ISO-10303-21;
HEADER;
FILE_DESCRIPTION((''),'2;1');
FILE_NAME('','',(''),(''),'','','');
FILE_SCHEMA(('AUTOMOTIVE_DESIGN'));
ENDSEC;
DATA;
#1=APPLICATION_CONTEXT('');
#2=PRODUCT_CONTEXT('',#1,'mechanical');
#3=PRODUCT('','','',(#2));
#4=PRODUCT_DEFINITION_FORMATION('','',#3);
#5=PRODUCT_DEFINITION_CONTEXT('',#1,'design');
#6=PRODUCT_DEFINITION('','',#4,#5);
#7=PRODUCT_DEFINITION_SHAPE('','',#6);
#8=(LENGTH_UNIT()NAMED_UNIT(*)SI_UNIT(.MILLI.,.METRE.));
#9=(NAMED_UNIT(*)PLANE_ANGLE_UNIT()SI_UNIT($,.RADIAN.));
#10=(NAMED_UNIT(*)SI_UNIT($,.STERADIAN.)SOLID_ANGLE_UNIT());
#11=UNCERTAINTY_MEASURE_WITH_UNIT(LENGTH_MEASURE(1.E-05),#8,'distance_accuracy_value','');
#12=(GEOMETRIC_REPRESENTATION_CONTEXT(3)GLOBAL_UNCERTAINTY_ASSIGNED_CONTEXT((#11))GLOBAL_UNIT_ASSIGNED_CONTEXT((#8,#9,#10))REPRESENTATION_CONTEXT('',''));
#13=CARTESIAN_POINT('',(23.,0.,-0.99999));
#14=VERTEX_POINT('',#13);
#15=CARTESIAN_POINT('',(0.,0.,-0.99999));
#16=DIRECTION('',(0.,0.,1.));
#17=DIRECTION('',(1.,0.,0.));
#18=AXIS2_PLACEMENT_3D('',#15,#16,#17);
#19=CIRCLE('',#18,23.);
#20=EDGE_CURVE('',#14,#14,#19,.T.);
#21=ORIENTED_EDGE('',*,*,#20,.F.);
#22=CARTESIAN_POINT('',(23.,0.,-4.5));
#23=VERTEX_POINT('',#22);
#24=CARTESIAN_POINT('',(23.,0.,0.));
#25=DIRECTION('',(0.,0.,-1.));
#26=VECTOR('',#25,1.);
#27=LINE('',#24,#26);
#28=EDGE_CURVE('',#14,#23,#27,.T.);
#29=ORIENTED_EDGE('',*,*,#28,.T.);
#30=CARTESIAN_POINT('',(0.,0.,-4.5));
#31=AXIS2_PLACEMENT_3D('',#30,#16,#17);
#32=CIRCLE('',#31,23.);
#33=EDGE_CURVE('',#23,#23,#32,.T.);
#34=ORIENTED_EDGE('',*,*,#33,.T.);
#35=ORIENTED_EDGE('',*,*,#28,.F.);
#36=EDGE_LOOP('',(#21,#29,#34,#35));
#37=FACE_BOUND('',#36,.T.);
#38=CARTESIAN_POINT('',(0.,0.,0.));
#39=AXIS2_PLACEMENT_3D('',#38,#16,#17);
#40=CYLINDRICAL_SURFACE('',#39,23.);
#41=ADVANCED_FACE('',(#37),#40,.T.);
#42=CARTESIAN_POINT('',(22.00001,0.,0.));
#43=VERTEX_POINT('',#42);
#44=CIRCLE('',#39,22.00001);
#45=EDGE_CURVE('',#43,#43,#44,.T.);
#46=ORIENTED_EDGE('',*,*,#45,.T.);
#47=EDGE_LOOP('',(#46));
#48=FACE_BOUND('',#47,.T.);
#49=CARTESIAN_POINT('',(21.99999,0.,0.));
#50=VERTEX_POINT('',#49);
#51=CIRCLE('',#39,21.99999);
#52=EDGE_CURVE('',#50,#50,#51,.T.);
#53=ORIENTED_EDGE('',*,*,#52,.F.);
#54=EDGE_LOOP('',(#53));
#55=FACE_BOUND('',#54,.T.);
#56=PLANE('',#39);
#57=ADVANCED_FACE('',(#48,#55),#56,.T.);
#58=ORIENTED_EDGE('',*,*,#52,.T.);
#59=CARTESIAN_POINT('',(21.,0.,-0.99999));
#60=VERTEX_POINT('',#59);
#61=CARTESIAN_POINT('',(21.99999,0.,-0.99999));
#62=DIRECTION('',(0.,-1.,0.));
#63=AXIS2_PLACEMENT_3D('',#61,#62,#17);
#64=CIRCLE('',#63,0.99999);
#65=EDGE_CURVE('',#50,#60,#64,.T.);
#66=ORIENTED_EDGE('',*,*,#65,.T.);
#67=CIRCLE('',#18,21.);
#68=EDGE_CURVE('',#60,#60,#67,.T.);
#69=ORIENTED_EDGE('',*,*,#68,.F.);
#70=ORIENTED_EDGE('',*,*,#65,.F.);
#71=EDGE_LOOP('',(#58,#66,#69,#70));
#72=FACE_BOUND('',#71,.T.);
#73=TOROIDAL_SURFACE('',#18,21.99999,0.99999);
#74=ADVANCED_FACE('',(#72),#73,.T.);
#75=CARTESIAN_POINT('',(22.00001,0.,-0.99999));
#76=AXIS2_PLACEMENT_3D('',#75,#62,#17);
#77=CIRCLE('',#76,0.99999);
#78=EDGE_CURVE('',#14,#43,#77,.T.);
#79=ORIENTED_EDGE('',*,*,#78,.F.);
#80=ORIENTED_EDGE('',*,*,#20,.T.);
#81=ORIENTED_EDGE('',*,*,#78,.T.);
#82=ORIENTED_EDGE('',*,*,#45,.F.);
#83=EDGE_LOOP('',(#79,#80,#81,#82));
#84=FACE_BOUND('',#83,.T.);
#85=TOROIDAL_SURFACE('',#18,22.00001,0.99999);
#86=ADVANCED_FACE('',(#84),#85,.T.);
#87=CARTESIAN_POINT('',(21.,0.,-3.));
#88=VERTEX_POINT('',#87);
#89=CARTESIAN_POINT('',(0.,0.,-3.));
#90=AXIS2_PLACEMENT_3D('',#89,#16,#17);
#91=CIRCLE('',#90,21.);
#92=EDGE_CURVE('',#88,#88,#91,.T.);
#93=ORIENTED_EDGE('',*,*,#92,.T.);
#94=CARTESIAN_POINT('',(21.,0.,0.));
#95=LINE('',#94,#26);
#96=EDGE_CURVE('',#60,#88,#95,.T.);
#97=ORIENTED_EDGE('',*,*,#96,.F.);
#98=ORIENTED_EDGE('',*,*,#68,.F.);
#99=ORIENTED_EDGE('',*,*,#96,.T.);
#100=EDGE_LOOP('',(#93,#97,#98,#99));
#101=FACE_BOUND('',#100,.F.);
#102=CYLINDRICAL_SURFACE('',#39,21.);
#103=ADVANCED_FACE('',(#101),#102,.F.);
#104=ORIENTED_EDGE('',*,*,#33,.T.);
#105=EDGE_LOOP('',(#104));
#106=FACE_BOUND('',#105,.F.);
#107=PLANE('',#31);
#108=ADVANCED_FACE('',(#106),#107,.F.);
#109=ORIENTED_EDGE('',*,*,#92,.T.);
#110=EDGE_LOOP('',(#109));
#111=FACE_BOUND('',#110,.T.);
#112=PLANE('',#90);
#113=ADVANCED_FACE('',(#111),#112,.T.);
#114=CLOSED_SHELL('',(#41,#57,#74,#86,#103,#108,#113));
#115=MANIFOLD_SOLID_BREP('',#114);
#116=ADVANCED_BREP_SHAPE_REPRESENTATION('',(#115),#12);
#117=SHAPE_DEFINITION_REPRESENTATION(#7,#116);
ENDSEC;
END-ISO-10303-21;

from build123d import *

# Parameters (mm, degrees)
F0_R     = 23
F0_R_2   = 21
F1_DEPTH = 4.5
F2_DEPTH = 3
F3_R     = 0.99999


# Not quite as in the source:
# - a fillet or chamfer is up to 0.001 mm smaller than in the source, because OpenCascade refuses the exact size


with BuildPart() as f1:
    # F0 (on Top) → F1 (new body)
    with BuildSketch(Plane.XY):
        Circle(F0_R)
        Circle(F0_R_2, mode=Mode.SUBTRACT)
        Circle(F0_R_2)
    extrude(amount=-F1_DEPTH)

    # F0 (on Top) → F2 (cut)
    with BuildSketch(Plane.XY):
        Circle(F0_R_2)
    extrude(amount=-F2_DEPTH, mode=Mode.SUBTRACT)

    # F3 (radius 1 in the source; OpenCascade refuses exactly that, so slightly less here)
    f3_edges = [f1.edges().sort_by_distance(p)[0] for p in [
        (-21, 0, 0),
        (-23, 0, 0),
    ]]
    fillet(f3_edges, radius=F3_R)


solid = f1.part
